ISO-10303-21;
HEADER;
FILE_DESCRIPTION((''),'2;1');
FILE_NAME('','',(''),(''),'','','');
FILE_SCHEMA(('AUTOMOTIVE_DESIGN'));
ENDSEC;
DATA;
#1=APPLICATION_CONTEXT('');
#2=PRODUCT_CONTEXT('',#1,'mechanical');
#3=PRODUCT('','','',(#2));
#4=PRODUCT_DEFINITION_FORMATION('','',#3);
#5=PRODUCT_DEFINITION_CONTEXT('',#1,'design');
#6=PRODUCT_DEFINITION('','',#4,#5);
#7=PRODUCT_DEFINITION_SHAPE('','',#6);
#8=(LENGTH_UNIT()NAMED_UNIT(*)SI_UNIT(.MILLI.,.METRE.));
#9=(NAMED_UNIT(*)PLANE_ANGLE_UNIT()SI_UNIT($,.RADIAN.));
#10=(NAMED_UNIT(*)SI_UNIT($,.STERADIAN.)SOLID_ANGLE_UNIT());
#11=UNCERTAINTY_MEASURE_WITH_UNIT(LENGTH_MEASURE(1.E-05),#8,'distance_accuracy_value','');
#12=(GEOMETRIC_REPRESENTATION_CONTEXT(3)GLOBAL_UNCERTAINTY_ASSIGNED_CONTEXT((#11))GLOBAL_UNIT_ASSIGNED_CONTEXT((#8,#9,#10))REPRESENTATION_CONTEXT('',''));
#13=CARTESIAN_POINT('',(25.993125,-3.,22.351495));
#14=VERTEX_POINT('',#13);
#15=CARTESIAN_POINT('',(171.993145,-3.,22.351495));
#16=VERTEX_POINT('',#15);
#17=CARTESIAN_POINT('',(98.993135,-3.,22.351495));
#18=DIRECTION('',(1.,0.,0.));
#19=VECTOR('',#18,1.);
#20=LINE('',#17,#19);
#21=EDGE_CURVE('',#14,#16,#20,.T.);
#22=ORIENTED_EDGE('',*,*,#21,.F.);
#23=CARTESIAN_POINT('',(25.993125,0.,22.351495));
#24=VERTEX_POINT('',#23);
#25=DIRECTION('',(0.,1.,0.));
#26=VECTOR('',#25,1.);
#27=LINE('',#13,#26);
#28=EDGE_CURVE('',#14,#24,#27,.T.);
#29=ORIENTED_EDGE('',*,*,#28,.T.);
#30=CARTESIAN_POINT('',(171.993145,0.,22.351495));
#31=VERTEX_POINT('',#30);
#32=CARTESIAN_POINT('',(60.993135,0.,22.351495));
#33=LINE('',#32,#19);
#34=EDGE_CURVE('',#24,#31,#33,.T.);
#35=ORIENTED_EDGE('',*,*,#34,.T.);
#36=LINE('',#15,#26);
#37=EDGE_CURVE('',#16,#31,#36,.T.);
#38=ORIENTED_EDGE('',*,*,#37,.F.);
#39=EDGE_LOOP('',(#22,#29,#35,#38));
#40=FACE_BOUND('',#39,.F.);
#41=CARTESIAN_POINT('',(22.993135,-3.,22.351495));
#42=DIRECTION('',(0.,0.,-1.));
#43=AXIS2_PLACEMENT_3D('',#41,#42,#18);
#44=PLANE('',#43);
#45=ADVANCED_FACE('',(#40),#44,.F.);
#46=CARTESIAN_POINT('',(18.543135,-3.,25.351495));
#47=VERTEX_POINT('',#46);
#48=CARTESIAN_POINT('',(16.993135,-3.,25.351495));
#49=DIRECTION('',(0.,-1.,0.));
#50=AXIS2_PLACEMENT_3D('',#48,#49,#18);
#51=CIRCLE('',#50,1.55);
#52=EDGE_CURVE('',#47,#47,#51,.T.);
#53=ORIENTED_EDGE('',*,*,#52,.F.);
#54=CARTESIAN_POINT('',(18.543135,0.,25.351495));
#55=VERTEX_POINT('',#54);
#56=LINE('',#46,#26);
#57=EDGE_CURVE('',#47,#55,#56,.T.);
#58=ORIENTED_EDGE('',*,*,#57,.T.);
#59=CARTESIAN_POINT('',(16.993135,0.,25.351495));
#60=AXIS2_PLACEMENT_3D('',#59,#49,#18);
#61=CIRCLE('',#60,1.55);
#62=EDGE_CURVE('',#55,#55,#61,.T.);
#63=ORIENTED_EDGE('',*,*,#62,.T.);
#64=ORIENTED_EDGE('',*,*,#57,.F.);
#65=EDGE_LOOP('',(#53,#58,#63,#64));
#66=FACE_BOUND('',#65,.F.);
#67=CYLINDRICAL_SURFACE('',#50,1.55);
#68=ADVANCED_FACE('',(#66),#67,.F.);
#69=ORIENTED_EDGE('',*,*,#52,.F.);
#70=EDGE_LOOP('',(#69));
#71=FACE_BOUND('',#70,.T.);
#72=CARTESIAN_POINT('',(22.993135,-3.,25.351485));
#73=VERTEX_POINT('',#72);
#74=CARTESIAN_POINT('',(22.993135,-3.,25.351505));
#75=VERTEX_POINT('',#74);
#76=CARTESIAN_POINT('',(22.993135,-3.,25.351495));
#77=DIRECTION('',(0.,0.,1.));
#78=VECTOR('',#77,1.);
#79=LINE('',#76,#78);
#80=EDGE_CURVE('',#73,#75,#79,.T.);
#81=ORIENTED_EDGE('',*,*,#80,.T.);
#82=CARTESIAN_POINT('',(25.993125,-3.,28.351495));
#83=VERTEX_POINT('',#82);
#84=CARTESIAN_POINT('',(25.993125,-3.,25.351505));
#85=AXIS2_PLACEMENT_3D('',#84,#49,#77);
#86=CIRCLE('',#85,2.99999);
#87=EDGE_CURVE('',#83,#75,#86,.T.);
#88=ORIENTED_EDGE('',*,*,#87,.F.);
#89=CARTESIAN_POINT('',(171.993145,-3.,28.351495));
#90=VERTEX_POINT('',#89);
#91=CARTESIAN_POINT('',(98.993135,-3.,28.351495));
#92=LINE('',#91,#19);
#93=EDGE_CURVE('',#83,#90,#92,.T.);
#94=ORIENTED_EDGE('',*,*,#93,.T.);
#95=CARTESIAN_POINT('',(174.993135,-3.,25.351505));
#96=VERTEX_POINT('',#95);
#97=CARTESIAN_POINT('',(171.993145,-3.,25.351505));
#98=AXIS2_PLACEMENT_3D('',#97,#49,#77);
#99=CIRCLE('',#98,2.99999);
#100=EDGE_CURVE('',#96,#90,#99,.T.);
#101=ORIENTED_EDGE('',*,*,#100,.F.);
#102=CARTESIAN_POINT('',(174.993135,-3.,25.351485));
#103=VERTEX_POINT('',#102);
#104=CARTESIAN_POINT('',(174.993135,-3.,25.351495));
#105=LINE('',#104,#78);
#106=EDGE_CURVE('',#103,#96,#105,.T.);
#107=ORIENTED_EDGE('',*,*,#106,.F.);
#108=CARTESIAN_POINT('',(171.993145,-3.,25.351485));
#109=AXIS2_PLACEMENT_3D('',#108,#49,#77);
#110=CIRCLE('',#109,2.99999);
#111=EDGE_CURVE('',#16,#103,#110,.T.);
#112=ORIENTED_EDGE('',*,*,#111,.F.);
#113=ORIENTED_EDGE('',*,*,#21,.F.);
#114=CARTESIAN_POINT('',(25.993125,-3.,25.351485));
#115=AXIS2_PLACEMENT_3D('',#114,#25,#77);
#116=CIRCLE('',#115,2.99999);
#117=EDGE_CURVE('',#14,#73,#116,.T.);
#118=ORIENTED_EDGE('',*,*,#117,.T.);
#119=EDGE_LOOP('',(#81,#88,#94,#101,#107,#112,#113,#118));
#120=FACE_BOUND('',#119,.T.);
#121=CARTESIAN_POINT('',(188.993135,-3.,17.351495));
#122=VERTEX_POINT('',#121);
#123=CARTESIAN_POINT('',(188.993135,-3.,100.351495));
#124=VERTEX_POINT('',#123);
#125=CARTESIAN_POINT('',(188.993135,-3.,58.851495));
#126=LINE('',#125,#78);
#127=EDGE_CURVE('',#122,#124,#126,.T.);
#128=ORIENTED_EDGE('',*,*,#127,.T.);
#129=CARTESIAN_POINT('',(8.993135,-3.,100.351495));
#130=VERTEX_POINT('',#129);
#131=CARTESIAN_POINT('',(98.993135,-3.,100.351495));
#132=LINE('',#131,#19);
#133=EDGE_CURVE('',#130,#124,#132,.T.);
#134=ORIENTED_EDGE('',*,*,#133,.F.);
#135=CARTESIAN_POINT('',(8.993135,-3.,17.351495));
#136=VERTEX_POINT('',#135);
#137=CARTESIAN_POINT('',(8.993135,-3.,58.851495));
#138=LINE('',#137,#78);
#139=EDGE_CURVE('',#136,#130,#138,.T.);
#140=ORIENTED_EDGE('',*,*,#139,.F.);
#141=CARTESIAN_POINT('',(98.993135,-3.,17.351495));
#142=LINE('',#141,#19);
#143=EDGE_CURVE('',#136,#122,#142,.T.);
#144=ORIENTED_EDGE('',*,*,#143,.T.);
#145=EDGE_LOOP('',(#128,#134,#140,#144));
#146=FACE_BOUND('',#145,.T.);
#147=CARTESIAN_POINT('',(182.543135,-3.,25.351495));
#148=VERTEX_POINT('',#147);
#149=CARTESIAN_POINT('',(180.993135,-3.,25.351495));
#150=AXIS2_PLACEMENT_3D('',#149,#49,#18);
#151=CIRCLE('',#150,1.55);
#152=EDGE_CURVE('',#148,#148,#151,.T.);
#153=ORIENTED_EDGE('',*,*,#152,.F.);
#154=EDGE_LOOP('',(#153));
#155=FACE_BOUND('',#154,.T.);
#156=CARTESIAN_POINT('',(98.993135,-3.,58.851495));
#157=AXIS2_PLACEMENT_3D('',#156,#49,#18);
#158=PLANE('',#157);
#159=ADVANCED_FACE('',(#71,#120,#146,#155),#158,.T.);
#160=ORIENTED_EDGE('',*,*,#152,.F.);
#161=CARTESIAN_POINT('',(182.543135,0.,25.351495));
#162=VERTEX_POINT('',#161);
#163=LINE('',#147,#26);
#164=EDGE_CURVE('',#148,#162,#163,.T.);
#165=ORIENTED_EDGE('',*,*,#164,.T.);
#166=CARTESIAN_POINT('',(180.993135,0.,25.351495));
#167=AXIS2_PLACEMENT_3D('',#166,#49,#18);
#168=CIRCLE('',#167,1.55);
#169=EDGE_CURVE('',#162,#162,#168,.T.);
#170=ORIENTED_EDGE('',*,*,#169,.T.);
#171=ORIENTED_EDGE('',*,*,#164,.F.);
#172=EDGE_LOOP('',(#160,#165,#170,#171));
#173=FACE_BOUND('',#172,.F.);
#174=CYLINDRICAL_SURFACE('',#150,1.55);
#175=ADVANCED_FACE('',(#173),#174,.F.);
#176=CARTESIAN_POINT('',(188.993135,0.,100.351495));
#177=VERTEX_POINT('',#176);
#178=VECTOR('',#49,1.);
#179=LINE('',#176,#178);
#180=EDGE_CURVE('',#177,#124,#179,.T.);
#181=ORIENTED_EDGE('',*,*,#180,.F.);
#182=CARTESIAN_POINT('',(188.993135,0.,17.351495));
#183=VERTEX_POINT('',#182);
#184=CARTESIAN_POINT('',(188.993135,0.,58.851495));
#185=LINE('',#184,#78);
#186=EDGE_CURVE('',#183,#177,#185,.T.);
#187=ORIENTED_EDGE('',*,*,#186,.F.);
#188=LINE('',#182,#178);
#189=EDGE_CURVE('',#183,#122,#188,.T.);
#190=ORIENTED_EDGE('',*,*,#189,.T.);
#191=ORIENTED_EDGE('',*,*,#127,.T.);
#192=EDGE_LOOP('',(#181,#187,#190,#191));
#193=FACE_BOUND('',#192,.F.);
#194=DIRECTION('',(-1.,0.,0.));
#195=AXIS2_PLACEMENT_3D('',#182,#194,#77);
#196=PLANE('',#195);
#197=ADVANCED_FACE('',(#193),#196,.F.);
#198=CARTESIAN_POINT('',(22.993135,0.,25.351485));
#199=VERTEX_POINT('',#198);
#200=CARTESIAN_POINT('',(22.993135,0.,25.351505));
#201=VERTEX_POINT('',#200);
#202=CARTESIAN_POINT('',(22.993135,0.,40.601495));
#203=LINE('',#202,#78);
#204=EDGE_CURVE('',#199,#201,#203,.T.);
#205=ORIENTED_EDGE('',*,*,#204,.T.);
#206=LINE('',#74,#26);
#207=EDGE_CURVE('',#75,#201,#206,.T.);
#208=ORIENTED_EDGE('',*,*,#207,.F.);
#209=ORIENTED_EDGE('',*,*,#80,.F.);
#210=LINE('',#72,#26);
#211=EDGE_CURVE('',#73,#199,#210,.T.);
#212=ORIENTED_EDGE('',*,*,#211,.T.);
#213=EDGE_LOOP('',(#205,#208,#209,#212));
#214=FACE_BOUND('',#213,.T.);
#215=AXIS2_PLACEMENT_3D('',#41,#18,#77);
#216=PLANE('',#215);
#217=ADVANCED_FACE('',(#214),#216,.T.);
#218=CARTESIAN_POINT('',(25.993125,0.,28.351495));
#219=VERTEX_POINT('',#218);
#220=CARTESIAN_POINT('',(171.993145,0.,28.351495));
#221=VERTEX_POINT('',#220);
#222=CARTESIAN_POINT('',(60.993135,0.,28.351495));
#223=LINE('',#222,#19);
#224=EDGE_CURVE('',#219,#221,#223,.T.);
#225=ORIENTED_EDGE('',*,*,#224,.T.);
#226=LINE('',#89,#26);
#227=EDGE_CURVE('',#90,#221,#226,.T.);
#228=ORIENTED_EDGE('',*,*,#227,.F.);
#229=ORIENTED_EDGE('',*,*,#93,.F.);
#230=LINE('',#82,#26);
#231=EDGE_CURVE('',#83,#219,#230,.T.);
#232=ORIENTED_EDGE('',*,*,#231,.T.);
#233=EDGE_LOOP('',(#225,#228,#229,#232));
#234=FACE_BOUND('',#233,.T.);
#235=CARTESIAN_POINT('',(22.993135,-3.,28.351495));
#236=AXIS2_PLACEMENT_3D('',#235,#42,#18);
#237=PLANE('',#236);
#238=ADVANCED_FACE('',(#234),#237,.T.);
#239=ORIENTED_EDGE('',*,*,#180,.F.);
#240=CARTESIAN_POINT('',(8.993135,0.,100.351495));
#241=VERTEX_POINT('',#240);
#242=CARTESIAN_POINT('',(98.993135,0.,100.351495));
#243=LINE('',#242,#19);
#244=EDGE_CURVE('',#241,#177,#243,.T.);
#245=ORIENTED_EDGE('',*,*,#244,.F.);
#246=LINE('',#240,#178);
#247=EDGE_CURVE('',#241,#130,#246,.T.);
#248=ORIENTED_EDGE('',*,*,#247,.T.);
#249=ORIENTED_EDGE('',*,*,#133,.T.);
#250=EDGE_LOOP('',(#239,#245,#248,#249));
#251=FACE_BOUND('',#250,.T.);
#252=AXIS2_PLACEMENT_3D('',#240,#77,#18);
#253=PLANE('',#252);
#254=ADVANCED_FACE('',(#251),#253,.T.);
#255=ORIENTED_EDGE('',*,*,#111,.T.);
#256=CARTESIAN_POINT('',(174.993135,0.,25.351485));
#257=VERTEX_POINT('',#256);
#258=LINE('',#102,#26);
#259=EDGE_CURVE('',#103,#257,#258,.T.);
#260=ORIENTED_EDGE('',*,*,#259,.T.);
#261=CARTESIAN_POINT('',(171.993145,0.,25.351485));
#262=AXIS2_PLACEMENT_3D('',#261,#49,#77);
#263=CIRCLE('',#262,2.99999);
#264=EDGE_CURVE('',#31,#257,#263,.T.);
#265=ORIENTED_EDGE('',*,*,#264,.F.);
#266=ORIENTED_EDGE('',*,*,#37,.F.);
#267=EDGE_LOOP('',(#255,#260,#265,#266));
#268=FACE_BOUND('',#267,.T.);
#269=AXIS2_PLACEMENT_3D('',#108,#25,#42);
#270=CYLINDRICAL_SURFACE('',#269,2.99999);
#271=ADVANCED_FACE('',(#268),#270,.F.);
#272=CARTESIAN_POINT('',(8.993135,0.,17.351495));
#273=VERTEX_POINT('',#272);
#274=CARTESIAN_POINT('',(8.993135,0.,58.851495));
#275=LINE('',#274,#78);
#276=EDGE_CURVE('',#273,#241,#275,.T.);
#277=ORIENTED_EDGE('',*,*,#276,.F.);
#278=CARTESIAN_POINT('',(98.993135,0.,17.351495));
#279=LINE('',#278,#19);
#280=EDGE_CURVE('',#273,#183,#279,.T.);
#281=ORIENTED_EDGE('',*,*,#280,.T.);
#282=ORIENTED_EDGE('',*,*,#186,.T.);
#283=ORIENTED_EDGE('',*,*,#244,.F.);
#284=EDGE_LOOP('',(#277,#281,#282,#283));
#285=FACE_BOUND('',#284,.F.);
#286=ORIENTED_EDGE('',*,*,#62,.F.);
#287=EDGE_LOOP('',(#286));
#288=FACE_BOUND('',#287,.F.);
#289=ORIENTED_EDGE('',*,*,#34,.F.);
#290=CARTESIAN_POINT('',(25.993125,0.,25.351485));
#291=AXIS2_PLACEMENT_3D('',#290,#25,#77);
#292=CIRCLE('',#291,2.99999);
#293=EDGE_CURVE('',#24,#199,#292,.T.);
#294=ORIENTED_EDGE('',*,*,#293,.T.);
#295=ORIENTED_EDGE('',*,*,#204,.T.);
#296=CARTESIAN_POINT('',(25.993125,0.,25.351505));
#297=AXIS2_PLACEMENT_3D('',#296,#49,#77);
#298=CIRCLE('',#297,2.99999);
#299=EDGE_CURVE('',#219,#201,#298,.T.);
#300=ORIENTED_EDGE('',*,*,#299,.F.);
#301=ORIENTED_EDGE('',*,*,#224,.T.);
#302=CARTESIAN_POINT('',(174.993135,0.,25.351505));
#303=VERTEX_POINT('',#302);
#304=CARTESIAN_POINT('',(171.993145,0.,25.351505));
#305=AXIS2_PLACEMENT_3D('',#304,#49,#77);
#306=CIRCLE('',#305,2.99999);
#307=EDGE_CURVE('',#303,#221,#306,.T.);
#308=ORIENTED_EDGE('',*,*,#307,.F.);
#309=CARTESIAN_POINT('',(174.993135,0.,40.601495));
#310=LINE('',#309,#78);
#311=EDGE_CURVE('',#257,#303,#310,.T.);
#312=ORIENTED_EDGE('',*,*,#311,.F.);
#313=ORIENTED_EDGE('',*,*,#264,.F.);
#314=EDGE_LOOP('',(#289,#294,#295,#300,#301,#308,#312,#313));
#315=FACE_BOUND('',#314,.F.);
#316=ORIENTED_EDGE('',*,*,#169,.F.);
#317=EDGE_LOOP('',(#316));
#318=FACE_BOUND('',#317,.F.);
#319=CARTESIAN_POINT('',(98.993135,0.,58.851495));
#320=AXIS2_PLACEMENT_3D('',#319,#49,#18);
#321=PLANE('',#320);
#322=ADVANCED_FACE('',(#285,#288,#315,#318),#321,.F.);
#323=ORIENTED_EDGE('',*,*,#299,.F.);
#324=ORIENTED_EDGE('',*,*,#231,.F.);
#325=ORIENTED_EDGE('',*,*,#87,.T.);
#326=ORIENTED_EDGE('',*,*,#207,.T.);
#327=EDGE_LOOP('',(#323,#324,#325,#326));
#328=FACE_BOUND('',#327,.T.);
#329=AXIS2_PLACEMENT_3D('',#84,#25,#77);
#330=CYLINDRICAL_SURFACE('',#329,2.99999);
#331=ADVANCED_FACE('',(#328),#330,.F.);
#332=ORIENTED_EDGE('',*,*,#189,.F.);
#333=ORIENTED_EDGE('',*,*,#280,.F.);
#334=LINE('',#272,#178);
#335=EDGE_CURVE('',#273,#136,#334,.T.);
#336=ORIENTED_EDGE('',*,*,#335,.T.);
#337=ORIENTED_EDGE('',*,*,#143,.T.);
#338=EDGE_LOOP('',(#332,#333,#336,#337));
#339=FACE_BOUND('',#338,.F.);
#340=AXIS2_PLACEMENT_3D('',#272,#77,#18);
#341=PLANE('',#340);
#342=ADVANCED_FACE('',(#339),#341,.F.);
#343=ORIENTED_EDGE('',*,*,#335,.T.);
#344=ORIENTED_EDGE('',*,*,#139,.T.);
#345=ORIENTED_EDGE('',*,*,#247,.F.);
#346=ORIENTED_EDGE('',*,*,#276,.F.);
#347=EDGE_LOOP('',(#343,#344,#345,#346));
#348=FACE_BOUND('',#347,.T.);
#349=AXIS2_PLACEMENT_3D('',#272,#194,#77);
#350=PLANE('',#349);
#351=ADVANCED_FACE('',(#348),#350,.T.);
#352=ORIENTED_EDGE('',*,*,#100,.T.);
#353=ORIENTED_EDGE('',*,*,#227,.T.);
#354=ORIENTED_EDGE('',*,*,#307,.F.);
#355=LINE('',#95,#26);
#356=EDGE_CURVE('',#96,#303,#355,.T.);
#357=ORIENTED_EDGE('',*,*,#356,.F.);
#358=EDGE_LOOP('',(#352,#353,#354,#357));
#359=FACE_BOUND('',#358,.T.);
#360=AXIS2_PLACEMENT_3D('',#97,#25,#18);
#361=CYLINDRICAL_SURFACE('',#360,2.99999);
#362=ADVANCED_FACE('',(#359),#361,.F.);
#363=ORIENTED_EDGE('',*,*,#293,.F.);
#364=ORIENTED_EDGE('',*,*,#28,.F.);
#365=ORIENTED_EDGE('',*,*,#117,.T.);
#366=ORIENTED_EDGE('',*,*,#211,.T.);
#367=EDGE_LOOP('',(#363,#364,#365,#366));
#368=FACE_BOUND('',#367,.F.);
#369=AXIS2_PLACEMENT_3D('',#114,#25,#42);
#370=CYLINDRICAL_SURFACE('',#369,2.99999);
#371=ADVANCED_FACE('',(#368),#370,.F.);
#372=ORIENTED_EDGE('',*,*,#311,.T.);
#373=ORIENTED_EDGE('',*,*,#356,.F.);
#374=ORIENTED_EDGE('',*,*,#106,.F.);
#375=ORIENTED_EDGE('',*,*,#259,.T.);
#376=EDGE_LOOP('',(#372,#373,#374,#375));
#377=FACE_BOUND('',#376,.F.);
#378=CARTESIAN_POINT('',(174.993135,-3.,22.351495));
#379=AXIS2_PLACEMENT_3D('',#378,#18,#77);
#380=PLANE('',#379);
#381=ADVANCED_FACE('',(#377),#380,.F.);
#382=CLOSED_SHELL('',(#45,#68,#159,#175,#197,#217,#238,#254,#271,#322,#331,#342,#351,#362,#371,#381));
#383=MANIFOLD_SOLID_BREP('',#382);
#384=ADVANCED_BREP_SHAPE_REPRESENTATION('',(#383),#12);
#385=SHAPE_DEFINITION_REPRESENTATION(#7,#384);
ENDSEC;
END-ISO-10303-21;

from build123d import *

# Parameters (mm, degrees)
F0_W     = 180
F0_H     = 83
F1_DEPTH = 3
F2_R     = 1.55
F2_W     = 152
F2_H     = 6
F3_DEPTH = 25
F4_R     = 2.99999


# Not quite as in the source:
# - a fillet or chamfer is up to 0.001 mm smaller than in the source, because OpenCascade refuses the exact size


with BuildPart() as f1:
    # F0 (on Front) → F1 (new body)
    with BuildSketch(Plane.XZ):
        with Locations((98.9931351204, 58.851495102)):
            Rectangle(F0_W, F0_H)
    extrude(amount=F1_DEPTH)

    # F2 (on face) → F3 (cut)
    with BuildSketch(Plane.XZ.offset(3)):
        with Locations((180.9931351204, 25.351495102)):
            Circle(F2_R)
        with Locations((98.9931351204, 25.351495102)):
            Rectangle(F2_W, F2_H)
        with Locations((16.9931351204, 25.351495102)):
            Circle(F2_R)
    extrude(amount=-F3_DEPTH, mode=Mode.SUBTRACT)

    # F4 (radius 3 in the source; OpenCascade refuses exactly that, so slightly less here)
    f4_edges = [f1.edges().sort_by_distance(p)[0] for p in [
        (22.993135, -1.5, 28.351495),
        (22.993135, -1.5, 22.351495),
        (174.993135, -1.5, 28.351495),
        (174.993135, -1.5, 22.351495),
    ]]
    fillet(f4_edges, radius=F4_R)


solid = f1.part
